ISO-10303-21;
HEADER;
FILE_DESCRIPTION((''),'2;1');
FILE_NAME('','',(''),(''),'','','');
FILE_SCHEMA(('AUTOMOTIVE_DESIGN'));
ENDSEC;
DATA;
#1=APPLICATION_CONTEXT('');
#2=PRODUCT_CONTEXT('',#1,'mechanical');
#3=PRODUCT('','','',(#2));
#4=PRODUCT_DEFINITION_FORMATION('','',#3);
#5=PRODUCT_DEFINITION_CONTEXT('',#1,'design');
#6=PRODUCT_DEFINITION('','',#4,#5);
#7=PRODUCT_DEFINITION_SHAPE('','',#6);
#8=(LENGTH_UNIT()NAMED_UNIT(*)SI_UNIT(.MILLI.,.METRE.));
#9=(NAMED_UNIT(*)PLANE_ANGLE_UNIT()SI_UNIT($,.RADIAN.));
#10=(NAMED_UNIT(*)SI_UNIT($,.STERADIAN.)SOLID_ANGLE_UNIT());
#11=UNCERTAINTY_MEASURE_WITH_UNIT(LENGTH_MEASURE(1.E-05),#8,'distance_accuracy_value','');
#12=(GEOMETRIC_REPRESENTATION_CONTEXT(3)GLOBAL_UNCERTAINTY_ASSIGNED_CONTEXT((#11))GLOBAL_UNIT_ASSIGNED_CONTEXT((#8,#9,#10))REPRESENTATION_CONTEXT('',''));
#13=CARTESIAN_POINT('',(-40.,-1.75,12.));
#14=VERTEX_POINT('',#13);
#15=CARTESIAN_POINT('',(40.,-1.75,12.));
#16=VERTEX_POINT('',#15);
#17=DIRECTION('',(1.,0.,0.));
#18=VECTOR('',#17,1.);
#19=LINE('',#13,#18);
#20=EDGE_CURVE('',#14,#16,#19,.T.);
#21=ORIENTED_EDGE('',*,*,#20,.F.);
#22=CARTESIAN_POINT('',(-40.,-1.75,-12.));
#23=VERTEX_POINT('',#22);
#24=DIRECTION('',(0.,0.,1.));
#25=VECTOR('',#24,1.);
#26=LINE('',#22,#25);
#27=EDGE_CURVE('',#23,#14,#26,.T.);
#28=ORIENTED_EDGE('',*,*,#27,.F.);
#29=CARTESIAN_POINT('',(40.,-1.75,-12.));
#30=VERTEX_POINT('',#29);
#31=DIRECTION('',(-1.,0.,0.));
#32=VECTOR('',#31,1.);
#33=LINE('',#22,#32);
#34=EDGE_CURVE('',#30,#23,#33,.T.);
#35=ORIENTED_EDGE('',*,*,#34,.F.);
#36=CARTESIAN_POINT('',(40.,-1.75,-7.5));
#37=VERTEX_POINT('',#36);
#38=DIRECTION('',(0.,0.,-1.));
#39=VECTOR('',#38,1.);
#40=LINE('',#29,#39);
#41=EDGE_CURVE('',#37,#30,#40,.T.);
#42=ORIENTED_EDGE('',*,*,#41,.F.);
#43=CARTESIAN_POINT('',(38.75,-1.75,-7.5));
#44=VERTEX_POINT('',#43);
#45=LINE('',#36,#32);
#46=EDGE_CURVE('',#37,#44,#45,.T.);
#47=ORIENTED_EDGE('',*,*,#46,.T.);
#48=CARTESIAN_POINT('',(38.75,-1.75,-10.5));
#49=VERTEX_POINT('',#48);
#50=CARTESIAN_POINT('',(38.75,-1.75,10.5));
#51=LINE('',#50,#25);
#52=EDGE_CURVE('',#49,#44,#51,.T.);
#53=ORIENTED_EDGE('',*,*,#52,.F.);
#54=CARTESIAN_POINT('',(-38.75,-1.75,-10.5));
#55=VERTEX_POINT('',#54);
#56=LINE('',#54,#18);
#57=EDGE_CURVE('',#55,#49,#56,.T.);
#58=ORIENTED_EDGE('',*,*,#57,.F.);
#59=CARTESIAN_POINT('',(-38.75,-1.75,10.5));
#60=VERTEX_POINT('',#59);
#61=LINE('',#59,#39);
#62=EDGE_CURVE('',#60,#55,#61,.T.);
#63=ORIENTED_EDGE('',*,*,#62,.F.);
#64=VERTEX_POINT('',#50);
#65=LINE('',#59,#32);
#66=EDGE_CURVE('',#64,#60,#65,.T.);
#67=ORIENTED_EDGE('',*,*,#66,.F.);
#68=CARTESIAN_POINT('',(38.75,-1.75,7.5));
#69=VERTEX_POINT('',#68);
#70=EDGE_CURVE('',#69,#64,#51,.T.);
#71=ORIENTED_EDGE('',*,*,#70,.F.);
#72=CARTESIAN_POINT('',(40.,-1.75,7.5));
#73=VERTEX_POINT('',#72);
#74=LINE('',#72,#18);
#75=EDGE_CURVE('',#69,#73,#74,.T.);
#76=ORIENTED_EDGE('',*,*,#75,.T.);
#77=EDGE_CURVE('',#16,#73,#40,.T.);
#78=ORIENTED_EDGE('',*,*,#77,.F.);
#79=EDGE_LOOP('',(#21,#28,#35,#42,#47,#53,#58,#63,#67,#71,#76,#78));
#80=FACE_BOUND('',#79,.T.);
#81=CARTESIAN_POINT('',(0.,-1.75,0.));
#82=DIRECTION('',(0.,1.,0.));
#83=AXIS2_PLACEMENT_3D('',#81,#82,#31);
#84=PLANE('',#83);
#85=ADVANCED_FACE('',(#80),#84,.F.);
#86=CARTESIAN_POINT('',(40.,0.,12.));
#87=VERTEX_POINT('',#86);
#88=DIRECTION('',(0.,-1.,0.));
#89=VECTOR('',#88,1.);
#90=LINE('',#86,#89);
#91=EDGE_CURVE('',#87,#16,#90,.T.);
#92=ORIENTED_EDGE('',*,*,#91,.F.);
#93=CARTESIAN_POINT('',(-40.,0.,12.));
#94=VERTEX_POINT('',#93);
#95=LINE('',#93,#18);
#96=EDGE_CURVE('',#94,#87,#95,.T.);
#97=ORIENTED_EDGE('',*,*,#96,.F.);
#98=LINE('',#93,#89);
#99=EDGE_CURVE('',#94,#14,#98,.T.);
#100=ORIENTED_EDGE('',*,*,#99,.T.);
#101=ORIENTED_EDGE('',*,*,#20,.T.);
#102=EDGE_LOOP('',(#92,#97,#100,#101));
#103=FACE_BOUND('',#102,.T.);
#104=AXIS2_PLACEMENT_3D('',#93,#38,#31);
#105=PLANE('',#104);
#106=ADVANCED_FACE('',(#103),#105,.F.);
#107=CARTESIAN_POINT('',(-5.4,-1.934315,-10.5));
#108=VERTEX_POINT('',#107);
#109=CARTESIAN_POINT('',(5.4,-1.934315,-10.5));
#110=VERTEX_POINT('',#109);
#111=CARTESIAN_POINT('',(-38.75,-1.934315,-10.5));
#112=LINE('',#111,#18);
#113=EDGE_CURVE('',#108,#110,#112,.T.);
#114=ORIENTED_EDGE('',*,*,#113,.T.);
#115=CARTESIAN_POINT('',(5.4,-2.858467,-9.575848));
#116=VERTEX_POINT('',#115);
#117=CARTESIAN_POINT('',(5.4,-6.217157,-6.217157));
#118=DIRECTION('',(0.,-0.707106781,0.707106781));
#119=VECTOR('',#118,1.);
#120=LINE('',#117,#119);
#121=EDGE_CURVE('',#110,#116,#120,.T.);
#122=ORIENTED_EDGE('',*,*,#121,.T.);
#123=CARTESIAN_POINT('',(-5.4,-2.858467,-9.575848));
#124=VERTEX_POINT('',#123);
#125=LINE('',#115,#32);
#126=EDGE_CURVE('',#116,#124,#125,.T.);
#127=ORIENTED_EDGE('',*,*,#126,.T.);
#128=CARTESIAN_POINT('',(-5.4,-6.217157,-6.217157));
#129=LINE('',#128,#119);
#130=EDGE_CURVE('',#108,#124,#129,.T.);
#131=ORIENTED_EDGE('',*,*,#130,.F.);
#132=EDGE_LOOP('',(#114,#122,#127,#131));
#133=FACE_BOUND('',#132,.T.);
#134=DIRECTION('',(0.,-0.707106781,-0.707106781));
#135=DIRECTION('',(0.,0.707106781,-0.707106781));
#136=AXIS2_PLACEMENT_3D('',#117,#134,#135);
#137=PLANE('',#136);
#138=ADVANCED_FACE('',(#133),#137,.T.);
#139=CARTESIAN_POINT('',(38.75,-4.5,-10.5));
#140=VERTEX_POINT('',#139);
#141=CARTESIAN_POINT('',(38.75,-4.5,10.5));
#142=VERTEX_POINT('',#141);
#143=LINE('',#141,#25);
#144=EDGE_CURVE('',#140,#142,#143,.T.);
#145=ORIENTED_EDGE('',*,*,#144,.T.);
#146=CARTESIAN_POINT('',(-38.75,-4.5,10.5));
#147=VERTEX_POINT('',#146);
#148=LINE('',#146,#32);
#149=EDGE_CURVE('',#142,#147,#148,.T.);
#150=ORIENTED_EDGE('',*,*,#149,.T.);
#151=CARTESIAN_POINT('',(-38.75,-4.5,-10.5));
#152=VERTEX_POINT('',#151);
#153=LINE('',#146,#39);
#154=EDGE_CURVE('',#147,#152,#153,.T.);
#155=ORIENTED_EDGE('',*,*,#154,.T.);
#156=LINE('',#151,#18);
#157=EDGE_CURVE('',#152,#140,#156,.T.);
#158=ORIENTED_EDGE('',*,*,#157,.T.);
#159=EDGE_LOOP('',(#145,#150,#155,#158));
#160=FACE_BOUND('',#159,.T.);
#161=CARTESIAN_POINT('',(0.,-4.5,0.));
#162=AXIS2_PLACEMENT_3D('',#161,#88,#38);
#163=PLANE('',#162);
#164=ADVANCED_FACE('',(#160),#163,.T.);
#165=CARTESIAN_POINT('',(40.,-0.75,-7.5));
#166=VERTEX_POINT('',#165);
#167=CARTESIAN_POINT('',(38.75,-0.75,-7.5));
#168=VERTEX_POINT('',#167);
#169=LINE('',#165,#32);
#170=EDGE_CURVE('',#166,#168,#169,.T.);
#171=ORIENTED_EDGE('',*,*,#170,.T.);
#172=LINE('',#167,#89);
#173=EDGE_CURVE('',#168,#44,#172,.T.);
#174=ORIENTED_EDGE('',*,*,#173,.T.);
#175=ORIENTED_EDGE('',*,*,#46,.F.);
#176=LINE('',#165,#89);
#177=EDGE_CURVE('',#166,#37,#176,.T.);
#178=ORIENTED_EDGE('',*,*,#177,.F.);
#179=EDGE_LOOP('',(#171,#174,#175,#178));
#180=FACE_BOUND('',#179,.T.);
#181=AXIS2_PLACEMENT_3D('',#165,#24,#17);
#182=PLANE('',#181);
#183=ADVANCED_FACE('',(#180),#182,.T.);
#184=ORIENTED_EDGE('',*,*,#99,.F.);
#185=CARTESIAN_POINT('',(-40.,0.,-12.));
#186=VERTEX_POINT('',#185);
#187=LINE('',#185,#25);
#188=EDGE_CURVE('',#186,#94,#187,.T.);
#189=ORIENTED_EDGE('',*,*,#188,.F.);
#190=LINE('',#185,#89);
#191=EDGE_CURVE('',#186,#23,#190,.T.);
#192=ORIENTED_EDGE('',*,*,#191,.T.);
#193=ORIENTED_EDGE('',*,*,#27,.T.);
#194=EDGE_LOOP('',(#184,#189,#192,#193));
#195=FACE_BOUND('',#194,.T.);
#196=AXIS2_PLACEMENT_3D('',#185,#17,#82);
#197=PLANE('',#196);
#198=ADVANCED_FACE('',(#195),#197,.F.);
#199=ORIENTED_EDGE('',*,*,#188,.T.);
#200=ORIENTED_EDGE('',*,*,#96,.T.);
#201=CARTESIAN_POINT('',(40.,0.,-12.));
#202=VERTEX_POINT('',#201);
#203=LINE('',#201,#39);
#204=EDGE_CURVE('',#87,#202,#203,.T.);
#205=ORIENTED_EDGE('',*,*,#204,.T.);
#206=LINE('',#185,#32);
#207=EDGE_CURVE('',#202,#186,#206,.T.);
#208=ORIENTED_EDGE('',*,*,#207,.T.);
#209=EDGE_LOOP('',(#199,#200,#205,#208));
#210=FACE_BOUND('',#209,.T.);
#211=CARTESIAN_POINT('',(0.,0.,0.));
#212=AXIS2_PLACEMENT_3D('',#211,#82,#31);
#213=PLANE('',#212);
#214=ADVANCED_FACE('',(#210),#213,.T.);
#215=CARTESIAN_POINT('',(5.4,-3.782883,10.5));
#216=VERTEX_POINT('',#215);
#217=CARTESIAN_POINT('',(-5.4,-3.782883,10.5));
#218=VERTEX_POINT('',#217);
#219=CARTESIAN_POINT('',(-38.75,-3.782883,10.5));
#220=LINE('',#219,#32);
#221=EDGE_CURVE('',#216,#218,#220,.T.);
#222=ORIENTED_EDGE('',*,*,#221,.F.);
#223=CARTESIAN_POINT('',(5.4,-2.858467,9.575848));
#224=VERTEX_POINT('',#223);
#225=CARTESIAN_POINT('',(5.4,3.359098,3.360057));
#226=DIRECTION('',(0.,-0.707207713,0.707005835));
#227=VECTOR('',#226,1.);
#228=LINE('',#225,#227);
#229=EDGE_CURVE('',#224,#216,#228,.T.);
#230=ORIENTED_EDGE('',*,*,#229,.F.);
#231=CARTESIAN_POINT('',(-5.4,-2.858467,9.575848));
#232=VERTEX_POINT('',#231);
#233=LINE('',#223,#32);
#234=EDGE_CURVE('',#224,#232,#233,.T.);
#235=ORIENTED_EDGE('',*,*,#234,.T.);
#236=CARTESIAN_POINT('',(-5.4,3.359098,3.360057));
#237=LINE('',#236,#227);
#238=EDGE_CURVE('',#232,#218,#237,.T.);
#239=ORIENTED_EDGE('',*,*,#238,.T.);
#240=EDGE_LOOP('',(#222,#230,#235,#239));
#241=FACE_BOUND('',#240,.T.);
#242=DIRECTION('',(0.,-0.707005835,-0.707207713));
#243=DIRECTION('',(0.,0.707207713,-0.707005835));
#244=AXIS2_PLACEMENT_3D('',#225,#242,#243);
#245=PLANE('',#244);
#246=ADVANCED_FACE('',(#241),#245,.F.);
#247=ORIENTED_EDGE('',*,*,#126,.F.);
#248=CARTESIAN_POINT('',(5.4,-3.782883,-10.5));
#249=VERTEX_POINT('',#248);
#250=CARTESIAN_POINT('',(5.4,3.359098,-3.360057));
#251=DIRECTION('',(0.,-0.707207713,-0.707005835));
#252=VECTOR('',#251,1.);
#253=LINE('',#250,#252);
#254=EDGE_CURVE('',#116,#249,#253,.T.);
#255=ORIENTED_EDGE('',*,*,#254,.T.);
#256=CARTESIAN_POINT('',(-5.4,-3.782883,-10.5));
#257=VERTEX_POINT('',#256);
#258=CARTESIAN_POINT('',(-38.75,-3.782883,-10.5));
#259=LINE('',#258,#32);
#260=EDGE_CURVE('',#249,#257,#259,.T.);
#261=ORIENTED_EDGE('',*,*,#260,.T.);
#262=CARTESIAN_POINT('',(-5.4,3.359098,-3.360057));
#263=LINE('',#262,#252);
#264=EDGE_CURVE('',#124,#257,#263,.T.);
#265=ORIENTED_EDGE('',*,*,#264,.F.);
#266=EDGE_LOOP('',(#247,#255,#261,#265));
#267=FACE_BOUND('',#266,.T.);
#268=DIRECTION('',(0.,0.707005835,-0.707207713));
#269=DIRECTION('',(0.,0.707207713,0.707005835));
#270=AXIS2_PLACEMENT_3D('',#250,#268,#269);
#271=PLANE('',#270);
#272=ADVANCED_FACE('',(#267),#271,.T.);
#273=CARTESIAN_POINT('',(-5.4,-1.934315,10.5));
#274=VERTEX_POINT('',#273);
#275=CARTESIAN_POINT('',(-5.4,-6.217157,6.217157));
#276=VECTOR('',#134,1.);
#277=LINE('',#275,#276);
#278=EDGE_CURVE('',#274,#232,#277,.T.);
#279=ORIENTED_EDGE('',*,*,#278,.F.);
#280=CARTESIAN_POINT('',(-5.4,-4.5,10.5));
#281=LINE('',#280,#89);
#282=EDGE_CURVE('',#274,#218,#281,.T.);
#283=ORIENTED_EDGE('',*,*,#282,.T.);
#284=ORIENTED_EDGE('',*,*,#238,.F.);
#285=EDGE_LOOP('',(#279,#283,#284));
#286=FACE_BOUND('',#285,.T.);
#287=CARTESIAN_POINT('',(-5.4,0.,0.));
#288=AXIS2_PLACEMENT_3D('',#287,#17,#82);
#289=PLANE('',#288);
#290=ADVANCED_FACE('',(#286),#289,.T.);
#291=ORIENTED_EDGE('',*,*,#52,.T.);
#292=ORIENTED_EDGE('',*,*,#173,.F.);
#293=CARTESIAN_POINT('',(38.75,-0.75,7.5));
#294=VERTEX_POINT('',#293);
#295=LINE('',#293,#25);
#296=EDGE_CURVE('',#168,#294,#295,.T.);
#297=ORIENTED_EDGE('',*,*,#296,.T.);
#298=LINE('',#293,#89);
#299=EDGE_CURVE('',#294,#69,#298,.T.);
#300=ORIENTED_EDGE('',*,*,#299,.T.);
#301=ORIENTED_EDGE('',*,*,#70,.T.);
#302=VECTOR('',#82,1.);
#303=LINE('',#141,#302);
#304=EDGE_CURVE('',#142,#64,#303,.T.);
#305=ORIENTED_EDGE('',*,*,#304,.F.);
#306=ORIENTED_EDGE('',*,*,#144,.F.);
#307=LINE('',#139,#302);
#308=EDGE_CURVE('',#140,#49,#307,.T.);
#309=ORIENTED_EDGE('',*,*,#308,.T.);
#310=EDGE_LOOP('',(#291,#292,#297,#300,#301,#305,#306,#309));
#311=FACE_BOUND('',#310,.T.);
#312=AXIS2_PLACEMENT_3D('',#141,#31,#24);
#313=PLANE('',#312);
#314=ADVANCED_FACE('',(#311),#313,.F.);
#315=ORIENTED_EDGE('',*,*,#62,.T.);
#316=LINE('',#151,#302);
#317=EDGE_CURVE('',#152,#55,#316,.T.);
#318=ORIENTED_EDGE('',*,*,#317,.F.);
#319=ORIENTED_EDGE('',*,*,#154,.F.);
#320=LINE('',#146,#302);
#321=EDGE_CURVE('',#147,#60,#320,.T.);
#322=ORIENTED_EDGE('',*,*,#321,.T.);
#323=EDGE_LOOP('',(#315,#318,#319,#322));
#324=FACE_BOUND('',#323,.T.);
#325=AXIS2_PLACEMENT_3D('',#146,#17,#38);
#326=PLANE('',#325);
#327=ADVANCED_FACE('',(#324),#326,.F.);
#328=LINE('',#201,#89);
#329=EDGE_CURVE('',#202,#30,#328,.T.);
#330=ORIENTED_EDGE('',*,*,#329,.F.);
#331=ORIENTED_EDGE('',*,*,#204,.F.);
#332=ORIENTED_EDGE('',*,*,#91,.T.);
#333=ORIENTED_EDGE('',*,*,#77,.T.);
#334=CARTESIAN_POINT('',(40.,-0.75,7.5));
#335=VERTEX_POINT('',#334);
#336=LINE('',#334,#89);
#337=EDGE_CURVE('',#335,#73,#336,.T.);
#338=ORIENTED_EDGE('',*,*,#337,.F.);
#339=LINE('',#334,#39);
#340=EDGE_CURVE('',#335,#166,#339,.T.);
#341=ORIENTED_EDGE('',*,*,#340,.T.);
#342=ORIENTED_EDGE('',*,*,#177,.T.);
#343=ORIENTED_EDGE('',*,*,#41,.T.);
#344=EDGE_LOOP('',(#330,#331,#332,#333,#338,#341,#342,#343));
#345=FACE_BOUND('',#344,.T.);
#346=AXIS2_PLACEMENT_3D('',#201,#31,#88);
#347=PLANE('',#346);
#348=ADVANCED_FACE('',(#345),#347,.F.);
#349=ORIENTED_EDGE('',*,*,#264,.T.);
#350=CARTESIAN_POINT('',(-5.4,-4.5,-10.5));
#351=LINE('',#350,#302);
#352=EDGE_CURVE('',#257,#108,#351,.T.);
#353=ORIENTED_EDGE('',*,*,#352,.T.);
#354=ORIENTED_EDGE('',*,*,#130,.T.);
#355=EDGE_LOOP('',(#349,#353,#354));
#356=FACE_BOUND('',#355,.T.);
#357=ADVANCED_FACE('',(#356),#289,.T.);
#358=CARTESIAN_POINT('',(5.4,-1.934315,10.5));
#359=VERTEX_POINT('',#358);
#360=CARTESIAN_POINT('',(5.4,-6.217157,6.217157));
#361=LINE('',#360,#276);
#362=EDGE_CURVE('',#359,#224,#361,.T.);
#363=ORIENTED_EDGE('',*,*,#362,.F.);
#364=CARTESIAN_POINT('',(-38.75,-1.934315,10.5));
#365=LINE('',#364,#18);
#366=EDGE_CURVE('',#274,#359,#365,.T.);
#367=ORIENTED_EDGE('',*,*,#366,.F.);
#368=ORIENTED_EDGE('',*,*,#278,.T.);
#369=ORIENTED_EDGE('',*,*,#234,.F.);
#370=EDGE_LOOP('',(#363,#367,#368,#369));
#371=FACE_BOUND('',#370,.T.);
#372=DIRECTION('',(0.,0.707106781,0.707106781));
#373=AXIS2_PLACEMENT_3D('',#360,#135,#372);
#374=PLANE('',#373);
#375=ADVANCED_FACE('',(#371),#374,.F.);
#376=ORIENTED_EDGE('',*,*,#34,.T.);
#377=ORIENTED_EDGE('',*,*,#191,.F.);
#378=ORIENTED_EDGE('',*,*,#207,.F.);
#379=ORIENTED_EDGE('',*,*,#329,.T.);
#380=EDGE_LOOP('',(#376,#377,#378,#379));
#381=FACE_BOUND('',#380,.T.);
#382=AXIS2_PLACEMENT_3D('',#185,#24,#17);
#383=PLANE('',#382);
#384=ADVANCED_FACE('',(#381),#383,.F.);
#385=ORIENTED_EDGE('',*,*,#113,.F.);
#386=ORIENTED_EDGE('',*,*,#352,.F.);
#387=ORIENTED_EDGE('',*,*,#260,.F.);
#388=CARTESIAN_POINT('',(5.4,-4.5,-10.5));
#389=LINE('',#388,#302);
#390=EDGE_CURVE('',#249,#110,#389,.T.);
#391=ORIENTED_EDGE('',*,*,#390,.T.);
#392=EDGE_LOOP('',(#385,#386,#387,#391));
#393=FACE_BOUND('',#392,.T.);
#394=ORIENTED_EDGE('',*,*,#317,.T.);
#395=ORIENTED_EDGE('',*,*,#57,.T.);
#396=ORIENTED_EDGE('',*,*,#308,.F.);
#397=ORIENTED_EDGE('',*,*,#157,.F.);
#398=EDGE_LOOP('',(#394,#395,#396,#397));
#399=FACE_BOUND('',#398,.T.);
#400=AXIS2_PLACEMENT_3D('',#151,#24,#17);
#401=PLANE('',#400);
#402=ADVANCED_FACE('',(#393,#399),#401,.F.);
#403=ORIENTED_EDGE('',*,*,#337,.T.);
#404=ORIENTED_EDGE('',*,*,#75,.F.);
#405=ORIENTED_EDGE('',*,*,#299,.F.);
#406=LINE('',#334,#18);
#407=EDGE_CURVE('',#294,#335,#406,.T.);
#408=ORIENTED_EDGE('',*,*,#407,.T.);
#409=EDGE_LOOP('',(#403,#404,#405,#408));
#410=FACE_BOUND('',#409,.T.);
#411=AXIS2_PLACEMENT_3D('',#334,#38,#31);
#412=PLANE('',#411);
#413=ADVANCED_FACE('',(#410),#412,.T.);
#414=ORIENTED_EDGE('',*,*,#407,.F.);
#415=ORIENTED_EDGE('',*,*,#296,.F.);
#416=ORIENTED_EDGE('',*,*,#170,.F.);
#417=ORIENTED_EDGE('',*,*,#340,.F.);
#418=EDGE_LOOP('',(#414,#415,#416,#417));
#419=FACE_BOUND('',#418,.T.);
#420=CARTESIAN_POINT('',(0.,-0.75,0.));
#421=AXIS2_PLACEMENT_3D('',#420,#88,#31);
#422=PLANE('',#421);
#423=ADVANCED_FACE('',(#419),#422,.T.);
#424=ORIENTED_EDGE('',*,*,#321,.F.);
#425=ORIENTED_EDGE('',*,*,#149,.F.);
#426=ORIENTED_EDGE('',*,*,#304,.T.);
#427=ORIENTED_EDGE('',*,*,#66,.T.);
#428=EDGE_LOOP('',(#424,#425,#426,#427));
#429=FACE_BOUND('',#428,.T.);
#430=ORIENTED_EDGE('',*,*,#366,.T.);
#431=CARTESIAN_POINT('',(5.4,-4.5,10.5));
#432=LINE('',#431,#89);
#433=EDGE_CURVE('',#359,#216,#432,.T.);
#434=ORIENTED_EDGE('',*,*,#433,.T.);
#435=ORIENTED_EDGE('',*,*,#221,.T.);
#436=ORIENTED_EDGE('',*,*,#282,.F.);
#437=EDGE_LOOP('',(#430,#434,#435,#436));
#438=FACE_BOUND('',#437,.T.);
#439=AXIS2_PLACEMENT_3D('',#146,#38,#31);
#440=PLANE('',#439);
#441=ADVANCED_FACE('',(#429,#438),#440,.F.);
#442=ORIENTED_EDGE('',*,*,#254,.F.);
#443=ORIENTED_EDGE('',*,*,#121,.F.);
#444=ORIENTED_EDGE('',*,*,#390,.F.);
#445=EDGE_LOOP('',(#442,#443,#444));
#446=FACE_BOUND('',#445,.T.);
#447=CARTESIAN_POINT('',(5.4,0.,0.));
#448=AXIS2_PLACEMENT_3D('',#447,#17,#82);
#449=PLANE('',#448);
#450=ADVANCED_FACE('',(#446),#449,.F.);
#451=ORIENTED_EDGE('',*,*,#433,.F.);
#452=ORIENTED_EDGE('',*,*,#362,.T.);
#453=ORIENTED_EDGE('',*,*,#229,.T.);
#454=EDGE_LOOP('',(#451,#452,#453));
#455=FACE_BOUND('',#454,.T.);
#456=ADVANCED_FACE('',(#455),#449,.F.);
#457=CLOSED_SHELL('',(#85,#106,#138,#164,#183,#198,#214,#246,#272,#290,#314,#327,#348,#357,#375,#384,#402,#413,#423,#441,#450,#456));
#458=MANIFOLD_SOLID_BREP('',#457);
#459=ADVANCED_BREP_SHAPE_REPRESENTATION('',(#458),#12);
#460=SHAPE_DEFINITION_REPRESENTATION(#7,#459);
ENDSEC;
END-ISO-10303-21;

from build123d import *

# Parameters (mm, degrees)
SKETCH1_W           = 80
SKETCH1_H           = 25
BOSS_EXTRUDE1_DEPTH = 1.75
SKETCH2_W           = 77.5
SKETCH2_H           = 21
BOSS_EXTRUDE3_DEPTH = 2.75
CAVITY1_START       = -40
CAVITY1_OUTLINE_W   = 1.75
CAVITY1_OUTLINE_H   = 25
CAVITY1_DEPTH       = 80
CAVITY1_START_2     = -5
CAVITY1_2_DEPTH     = 10
CUT_EXTRUDE1_START  = -0.4
CUT_EXTRUDE1_DEPTH  = 10.8
SKETCH5_W           = 80
SKETCH5_H           = 24
BOSS_EXTRUDE4_DEPTH = 1.75
SKETCH7_W           = 1.25
SKETCH7_H           = 15
CUT_EXTRUDE2_DEPTH  = 1
SKETCH8_W           = 1.25
SKETCH8_H           = 15
BOSS_EXTRUDE5_DEPTH = 1


# Read off the part's stored shape, not the designer's step: Cavity1
with BuildPart() as part:
    # Sketch1 → Boss-Extrude1 (new body)
    with BuildSketch(Plane(origin=(0, 0, 0), x_dir=(1, 0, 0), z_dir=(0, 1, 0))):
        Rectangle(SKETCH1_W, SKETCH1_H)
    extrude(amount=-BOSS_EXTRUDE1_DEPTH)

    # Sketch2 → Boss-Extrude3 (add)
    with BuildSketch(Plane(origin=(0, -1.75, 0), x_dir=(-1, 0, 0), z_dir=(0, -1, 0))):
        Rectangle(SKETCH2_W, SKETCH2_H)
    extrude(amount=BOSS_EXTRUDE3_DEPTH)

    # Cavity1 outline → Cavity1 (cut)
    with BuildSketch(Plane.YZ.offset(CAVITY1_START)):
        with Locations((-0.875, 0)):
            Rectangle(CAVITY1_OUTLINE_W, CAVITY1_OUTLINE_H)
    extrude(amount=CAVITY1_DEPTH, mode=Mode.SUBTRACT)

    # Cavity1 2 outline → Cavity1 2 (cut)
    with BuildSketch(Plane.YZ.offset(CAVITY1_START_2)):
        with BuildLine():
            Line((-2.717157288, 10.282842712), (-2.5, 10.5))
            Line((-2.5, 10.5), (-3.5, 10.5))
            Line((-3.5, 10.5), (-3.282842712, 10.282842712))
            ThreePointArc((-3.282842712, 10.282842712), (-3, 10.165685425), (-2.717157288, 10.282842712))
        make_face()
        with BuildLine():
            Line((-3.5, -10.5), (-2.5, -10.5))
            Line((-2.5, -10.5), (-2.717157288, -10.282842712))
            ThreePointArc((-2.717157288, -10.282842712), (-3, -10.165685425), (-3.282842712, -10.282842712))
            Line((-3.282842712, -10.282842712), (-3.5, -10.5))
        make_face()
    extrude(amount=CAVITY1_2_DEPTH, mode=Mode.SUBTRACT)

    # Sketch4 → Cut-Extrude1 (cut)
    with BuildSketch(Plane(origin=(-5, 0, 0), x_dir=(0, 0, -1), z_dir=(1, 0, 0)).offset(CUT_EXTRUDE1_START)):
        Polygon((-10.800137225, -1.63417735), (-9.57584768, -2.858466895), (-10.943501518, -4.226511252), align=None)
    cut_extrude1 = extrude(amount=CUT_EXTRUDE1_DEPTH, mode=Mode.SUBTRACT)

    # Mirror1: Cut-Extrude1 across plane
    add(cut_extrude1.mirror(Plane.XY), mode=Mode.SUBTRACT)

    # Sketch5 → Boss-Extrude4 (add)
    with BuildSketch(Plane(origin=(0, -1.75, 0), x_dir=(1, 0, 0), z_dir=(0, 1, 0))):
        Rectangle(SKETCH5_W, SKETCH5_H)
    extrude(amount=BOSS_EXTRUDE4_DEPTH)

    # Sketch7 → Cut-Extrude2 (cut)
    with BuildSketch(Plane.XZ.offset(1.75)):
        with Locations((-39.375, 0)):
            Rectangle(SKETCH7_W, SKETCH7_H)
    cut_extrude2 = extrude(amount=-CUT_EXTRUDE2_DEPTH, mode=Mode.SUBTRACT)

    # Mirror2: Cut-Extrude2 across plane
    add(cut_extrude2.mirror(Plane(origin=(0, 0, 0), x_dir=(0, 0, 1), z_dir=(1, 0, 0))), mode=Mode.SUBTRACT)

    # Sketch8 → Boss-Extrude5 (add)
    with BuildSketch(Plane(origin=(0, -0.75, 0), x_dir=(-1, 0, 0), z_dir=(0, -1, 0))):
        with Locations((39.375, 0)):
            Rectangle(SKETCH8_W, SKETCH8_H)
    extrude(amount=BOSS_EXTRUDE5_DEPTH)


solid = part.part
